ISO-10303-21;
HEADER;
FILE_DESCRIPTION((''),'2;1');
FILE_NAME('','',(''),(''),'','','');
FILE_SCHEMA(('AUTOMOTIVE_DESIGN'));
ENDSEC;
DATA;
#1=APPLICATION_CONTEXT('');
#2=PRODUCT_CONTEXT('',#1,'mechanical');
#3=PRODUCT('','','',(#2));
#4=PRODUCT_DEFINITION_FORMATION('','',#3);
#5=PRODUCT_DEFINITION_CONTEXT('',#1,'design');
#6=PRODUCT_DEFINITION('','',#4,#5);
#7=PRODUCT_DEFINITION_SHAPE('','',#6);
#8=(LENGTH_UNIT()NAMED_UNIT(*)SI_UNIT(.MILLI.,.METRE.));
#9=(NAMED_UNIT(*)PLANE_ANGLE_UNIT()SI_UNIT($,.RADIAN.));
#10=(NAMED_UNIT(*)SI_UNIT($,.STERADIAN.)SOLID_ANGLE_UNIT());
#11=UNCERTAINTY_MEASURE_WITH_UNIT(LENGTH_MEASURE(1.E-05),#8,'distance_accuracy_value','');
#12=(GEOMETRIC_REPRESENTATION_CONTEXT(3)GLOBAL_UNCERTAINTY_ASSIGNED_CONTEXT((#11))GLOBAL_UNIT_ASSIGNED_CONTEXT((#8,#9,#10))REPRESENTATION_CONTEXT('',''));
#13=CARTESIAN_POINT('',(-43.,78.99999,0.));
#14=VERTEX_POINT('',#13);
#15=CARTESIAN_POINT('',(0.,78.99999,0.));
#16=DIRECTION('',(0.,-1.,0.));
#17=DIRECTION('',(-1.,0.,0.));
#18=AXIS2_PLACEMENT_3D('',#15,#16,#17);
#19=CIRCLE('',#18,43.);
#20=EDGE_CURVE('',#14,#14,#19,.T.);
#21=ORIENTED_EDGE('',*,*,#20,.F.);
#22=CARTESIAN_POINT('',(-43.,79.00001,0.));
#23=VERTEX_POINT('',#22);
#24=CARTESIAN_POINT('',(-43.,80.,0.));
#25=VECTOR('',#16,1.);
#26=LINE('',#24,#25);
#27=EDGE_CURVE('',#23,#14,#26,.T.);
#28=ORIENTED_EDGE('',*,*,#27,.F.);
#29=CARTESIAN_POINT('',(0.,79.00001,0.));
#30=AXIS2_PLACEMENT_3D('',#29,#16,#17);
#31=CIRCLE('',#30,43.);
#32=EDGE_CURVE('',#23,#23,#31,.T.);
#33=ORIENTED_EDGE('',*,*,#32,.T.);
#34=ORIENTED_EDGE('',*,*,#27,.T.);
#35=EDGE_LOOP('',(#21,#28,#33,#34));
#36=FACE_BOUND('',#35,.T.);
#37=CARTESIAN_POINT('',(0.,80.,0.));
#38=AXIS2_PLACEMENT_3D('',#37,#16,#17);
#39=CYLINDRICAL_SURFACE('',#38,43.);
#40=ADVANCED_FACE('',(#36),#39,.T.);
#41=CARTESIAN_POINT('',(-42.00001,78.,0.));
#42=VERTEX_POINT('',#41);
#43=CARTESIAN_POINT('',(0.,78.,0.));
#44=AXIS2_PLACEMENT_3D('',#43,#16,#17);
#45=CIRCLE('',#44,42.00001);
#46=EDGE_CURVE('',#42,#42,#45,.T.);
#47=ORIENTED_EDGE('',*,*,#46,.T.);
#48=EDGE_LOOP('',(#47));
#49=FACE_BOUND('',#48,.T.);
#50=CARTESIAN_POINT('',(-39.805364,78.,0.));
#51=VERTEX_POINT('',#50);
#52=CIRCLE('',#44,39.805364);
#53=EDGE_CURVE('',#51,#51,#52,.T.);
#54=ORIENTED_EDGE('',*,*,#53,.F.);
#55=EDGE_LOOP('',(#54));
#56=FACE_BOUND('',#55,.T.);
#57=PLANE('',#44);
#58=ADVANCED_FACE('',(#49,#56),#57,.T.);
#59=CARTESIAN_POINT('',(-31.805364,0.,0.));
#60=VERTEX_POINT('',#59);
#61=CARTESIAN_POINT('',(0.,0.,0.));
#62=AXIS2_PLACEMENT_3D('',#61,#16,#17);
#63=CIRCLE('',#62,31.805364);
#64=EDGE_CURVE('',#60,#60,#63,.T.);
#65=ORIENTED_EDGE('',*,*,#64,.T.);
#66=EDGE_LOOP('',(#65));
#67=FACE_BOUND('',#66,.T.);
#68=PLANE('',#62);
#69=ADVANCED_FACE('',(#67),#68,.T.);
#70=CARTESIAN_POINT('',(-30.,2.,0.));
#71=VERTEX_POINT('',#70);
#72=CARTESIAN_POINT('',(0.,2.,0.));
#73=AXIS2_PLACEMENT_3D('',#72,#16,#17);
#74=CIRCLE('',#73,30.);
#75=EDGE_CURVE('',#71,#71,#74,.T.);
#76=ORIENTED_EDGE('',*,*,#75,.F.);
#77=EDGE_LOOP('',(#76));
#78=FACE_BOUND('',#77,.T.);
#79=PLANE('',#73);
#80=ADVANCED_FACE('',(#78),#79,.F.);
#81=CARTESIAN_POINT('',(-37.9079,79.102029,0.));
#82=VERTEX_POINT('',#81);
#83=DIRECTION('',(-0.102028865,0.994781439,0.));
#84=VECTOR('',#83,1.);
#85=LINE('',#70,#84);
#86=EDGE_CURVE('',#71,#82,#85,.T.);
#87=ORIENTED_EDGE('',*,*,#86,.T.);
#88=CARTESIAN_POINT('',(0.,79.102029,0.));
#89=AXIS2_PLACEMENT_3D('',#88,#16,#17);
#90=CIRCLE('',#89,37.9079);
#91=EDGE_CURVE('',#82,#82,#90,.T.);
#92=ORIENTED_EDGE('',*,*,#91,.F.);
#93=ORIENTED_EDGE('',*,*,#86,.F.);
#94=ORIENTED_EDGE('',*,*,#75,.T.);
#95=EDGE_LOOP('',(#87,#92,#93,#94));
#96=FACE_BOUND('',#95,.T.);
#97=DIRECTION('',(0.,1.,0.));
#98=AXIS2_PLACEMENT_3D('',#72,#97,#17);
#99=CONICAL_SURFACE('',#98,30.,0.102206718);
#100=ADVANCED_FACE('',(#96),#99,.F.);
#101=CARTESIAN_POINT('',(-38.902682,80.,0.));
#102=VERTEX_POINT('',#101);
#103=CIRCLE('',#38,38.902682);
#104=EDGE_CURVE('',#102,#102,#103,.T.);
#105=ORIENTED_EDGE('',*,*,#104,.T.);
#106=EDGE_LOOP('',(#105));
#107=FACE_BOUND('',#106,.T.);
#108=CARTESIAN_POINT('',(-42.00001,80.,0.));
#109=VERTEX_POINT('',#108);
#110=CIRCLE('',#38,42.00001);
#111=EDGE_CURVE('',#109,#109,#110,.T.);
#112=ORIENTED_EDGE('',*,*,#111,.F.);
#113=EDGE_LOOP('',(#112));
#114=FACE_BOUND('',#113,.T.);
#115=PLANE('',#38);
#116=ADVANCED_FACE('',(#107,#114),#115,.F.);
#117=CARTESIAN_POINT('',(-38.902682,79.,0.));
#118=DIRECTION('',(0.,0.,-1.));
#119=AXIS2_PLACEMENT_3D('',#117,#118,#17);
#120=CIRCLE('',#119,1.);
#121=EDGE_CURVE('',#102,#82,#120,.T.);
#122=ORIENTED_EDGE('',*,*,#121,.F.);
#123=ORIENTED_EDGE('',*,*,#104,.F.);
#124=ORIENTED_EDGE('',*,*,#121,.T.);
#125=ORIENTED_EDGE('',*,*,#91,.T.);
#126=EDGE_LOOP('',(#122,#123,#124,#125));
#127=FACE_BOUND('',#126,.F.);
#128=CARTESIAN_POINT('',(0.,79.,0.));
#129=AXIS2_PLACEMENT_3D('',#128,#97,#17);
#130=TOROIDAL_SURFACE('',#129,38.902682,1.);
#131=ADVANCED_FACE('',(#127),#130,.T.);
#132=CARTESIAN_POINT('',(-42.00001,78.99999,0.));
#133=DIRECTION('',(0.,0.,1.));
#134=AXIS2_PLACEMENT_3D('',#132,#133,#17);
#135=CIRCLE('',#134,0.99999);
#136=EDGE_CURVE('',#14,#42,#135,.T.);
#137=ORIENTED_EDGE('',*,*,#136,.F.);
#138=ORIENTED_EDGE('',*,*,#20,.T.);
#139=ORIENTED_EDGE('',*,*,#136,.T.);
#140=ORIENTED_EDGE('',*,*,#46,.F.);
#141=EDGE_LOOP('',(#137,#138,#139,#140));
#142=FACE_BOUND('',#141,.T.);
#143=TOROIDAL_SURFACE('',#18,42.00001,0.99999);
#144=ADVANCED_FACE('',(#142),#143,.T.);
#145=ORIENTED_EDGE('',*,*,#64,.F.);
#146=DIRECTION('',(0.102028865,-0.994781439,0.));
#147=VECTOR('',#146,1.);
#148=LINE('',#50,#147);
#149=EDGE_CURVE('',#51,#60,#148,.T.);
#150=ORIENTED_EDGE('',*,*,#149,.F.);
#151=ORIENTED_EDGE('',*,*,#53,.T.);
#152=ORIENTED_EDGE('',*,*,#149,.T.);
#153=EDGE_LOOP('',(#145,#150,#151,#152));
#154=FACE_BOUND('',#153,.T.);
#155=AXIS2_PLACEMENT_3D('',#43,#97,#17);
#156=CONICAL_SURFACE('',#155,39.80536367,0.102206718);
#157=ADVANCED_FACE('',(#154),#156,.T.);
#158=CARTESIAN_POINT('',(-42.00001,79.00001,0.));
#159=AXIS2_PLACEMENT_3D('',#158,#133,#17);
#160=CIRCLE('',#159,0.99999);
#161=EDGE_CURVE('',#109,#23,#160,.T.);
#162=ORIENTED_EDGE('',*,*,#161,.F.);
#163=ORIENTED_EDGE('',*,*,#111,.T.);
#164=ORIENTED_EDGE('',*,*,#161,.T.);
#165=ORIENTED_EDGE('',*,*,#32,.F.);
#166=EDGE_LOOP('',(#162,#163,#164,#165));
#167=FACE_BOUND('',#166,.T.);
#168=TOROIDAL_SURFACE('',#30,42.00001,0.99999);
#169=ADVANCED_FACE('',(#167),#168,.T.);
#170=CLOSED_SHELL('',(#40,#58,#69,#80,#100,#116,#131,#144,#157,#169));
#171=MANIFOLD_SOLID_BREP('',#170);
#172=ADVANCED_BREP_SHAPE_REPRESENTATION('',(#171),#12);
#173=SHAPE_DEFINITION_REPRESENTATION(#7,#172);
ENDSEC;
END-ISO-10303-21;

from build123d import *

# Parameters (mm, degrees)
F2_R = 0.99999
F3_R = 1


# Not quite as in the source:
# - a fillet or chamfer is up to 0.001 mm smaller than in the source, because OpenCascade refuses the exact size


with BuildPart() as f1:
    # F0 (on Top) → F1 (revolve)
    with BuildSketch(Plane.XY):
        Polygon((-31.8053636701, 0), (0, 0), (0, 2), (-30, 2), (-38, 80), (-43, 80), (-43, 78), (-39.8053636701, 78), align=None)
    revolve(axis=Axis((0, 3.6410242221, 0), (0, -1, 0)))

    # F2 (radius 1 in the source; OpenCascade refuses exactly that, so slightly less here)
    f2_edges = [f1.edges().sort_by_distance(p)[0] for p in [
        (43, 80, 0),
        (43, 78, 0),
        (-43, 79, 0),
    ]]
    fillet(f2_edges, radius=F2_R)

    # F3
    f3_edges = [f1.edges().sort_by_distance(p)[0] for p in [
        (38, 80, 0),
    ]]
    fillet(f3_edges, radius=F3_R)


solid = f1.part
